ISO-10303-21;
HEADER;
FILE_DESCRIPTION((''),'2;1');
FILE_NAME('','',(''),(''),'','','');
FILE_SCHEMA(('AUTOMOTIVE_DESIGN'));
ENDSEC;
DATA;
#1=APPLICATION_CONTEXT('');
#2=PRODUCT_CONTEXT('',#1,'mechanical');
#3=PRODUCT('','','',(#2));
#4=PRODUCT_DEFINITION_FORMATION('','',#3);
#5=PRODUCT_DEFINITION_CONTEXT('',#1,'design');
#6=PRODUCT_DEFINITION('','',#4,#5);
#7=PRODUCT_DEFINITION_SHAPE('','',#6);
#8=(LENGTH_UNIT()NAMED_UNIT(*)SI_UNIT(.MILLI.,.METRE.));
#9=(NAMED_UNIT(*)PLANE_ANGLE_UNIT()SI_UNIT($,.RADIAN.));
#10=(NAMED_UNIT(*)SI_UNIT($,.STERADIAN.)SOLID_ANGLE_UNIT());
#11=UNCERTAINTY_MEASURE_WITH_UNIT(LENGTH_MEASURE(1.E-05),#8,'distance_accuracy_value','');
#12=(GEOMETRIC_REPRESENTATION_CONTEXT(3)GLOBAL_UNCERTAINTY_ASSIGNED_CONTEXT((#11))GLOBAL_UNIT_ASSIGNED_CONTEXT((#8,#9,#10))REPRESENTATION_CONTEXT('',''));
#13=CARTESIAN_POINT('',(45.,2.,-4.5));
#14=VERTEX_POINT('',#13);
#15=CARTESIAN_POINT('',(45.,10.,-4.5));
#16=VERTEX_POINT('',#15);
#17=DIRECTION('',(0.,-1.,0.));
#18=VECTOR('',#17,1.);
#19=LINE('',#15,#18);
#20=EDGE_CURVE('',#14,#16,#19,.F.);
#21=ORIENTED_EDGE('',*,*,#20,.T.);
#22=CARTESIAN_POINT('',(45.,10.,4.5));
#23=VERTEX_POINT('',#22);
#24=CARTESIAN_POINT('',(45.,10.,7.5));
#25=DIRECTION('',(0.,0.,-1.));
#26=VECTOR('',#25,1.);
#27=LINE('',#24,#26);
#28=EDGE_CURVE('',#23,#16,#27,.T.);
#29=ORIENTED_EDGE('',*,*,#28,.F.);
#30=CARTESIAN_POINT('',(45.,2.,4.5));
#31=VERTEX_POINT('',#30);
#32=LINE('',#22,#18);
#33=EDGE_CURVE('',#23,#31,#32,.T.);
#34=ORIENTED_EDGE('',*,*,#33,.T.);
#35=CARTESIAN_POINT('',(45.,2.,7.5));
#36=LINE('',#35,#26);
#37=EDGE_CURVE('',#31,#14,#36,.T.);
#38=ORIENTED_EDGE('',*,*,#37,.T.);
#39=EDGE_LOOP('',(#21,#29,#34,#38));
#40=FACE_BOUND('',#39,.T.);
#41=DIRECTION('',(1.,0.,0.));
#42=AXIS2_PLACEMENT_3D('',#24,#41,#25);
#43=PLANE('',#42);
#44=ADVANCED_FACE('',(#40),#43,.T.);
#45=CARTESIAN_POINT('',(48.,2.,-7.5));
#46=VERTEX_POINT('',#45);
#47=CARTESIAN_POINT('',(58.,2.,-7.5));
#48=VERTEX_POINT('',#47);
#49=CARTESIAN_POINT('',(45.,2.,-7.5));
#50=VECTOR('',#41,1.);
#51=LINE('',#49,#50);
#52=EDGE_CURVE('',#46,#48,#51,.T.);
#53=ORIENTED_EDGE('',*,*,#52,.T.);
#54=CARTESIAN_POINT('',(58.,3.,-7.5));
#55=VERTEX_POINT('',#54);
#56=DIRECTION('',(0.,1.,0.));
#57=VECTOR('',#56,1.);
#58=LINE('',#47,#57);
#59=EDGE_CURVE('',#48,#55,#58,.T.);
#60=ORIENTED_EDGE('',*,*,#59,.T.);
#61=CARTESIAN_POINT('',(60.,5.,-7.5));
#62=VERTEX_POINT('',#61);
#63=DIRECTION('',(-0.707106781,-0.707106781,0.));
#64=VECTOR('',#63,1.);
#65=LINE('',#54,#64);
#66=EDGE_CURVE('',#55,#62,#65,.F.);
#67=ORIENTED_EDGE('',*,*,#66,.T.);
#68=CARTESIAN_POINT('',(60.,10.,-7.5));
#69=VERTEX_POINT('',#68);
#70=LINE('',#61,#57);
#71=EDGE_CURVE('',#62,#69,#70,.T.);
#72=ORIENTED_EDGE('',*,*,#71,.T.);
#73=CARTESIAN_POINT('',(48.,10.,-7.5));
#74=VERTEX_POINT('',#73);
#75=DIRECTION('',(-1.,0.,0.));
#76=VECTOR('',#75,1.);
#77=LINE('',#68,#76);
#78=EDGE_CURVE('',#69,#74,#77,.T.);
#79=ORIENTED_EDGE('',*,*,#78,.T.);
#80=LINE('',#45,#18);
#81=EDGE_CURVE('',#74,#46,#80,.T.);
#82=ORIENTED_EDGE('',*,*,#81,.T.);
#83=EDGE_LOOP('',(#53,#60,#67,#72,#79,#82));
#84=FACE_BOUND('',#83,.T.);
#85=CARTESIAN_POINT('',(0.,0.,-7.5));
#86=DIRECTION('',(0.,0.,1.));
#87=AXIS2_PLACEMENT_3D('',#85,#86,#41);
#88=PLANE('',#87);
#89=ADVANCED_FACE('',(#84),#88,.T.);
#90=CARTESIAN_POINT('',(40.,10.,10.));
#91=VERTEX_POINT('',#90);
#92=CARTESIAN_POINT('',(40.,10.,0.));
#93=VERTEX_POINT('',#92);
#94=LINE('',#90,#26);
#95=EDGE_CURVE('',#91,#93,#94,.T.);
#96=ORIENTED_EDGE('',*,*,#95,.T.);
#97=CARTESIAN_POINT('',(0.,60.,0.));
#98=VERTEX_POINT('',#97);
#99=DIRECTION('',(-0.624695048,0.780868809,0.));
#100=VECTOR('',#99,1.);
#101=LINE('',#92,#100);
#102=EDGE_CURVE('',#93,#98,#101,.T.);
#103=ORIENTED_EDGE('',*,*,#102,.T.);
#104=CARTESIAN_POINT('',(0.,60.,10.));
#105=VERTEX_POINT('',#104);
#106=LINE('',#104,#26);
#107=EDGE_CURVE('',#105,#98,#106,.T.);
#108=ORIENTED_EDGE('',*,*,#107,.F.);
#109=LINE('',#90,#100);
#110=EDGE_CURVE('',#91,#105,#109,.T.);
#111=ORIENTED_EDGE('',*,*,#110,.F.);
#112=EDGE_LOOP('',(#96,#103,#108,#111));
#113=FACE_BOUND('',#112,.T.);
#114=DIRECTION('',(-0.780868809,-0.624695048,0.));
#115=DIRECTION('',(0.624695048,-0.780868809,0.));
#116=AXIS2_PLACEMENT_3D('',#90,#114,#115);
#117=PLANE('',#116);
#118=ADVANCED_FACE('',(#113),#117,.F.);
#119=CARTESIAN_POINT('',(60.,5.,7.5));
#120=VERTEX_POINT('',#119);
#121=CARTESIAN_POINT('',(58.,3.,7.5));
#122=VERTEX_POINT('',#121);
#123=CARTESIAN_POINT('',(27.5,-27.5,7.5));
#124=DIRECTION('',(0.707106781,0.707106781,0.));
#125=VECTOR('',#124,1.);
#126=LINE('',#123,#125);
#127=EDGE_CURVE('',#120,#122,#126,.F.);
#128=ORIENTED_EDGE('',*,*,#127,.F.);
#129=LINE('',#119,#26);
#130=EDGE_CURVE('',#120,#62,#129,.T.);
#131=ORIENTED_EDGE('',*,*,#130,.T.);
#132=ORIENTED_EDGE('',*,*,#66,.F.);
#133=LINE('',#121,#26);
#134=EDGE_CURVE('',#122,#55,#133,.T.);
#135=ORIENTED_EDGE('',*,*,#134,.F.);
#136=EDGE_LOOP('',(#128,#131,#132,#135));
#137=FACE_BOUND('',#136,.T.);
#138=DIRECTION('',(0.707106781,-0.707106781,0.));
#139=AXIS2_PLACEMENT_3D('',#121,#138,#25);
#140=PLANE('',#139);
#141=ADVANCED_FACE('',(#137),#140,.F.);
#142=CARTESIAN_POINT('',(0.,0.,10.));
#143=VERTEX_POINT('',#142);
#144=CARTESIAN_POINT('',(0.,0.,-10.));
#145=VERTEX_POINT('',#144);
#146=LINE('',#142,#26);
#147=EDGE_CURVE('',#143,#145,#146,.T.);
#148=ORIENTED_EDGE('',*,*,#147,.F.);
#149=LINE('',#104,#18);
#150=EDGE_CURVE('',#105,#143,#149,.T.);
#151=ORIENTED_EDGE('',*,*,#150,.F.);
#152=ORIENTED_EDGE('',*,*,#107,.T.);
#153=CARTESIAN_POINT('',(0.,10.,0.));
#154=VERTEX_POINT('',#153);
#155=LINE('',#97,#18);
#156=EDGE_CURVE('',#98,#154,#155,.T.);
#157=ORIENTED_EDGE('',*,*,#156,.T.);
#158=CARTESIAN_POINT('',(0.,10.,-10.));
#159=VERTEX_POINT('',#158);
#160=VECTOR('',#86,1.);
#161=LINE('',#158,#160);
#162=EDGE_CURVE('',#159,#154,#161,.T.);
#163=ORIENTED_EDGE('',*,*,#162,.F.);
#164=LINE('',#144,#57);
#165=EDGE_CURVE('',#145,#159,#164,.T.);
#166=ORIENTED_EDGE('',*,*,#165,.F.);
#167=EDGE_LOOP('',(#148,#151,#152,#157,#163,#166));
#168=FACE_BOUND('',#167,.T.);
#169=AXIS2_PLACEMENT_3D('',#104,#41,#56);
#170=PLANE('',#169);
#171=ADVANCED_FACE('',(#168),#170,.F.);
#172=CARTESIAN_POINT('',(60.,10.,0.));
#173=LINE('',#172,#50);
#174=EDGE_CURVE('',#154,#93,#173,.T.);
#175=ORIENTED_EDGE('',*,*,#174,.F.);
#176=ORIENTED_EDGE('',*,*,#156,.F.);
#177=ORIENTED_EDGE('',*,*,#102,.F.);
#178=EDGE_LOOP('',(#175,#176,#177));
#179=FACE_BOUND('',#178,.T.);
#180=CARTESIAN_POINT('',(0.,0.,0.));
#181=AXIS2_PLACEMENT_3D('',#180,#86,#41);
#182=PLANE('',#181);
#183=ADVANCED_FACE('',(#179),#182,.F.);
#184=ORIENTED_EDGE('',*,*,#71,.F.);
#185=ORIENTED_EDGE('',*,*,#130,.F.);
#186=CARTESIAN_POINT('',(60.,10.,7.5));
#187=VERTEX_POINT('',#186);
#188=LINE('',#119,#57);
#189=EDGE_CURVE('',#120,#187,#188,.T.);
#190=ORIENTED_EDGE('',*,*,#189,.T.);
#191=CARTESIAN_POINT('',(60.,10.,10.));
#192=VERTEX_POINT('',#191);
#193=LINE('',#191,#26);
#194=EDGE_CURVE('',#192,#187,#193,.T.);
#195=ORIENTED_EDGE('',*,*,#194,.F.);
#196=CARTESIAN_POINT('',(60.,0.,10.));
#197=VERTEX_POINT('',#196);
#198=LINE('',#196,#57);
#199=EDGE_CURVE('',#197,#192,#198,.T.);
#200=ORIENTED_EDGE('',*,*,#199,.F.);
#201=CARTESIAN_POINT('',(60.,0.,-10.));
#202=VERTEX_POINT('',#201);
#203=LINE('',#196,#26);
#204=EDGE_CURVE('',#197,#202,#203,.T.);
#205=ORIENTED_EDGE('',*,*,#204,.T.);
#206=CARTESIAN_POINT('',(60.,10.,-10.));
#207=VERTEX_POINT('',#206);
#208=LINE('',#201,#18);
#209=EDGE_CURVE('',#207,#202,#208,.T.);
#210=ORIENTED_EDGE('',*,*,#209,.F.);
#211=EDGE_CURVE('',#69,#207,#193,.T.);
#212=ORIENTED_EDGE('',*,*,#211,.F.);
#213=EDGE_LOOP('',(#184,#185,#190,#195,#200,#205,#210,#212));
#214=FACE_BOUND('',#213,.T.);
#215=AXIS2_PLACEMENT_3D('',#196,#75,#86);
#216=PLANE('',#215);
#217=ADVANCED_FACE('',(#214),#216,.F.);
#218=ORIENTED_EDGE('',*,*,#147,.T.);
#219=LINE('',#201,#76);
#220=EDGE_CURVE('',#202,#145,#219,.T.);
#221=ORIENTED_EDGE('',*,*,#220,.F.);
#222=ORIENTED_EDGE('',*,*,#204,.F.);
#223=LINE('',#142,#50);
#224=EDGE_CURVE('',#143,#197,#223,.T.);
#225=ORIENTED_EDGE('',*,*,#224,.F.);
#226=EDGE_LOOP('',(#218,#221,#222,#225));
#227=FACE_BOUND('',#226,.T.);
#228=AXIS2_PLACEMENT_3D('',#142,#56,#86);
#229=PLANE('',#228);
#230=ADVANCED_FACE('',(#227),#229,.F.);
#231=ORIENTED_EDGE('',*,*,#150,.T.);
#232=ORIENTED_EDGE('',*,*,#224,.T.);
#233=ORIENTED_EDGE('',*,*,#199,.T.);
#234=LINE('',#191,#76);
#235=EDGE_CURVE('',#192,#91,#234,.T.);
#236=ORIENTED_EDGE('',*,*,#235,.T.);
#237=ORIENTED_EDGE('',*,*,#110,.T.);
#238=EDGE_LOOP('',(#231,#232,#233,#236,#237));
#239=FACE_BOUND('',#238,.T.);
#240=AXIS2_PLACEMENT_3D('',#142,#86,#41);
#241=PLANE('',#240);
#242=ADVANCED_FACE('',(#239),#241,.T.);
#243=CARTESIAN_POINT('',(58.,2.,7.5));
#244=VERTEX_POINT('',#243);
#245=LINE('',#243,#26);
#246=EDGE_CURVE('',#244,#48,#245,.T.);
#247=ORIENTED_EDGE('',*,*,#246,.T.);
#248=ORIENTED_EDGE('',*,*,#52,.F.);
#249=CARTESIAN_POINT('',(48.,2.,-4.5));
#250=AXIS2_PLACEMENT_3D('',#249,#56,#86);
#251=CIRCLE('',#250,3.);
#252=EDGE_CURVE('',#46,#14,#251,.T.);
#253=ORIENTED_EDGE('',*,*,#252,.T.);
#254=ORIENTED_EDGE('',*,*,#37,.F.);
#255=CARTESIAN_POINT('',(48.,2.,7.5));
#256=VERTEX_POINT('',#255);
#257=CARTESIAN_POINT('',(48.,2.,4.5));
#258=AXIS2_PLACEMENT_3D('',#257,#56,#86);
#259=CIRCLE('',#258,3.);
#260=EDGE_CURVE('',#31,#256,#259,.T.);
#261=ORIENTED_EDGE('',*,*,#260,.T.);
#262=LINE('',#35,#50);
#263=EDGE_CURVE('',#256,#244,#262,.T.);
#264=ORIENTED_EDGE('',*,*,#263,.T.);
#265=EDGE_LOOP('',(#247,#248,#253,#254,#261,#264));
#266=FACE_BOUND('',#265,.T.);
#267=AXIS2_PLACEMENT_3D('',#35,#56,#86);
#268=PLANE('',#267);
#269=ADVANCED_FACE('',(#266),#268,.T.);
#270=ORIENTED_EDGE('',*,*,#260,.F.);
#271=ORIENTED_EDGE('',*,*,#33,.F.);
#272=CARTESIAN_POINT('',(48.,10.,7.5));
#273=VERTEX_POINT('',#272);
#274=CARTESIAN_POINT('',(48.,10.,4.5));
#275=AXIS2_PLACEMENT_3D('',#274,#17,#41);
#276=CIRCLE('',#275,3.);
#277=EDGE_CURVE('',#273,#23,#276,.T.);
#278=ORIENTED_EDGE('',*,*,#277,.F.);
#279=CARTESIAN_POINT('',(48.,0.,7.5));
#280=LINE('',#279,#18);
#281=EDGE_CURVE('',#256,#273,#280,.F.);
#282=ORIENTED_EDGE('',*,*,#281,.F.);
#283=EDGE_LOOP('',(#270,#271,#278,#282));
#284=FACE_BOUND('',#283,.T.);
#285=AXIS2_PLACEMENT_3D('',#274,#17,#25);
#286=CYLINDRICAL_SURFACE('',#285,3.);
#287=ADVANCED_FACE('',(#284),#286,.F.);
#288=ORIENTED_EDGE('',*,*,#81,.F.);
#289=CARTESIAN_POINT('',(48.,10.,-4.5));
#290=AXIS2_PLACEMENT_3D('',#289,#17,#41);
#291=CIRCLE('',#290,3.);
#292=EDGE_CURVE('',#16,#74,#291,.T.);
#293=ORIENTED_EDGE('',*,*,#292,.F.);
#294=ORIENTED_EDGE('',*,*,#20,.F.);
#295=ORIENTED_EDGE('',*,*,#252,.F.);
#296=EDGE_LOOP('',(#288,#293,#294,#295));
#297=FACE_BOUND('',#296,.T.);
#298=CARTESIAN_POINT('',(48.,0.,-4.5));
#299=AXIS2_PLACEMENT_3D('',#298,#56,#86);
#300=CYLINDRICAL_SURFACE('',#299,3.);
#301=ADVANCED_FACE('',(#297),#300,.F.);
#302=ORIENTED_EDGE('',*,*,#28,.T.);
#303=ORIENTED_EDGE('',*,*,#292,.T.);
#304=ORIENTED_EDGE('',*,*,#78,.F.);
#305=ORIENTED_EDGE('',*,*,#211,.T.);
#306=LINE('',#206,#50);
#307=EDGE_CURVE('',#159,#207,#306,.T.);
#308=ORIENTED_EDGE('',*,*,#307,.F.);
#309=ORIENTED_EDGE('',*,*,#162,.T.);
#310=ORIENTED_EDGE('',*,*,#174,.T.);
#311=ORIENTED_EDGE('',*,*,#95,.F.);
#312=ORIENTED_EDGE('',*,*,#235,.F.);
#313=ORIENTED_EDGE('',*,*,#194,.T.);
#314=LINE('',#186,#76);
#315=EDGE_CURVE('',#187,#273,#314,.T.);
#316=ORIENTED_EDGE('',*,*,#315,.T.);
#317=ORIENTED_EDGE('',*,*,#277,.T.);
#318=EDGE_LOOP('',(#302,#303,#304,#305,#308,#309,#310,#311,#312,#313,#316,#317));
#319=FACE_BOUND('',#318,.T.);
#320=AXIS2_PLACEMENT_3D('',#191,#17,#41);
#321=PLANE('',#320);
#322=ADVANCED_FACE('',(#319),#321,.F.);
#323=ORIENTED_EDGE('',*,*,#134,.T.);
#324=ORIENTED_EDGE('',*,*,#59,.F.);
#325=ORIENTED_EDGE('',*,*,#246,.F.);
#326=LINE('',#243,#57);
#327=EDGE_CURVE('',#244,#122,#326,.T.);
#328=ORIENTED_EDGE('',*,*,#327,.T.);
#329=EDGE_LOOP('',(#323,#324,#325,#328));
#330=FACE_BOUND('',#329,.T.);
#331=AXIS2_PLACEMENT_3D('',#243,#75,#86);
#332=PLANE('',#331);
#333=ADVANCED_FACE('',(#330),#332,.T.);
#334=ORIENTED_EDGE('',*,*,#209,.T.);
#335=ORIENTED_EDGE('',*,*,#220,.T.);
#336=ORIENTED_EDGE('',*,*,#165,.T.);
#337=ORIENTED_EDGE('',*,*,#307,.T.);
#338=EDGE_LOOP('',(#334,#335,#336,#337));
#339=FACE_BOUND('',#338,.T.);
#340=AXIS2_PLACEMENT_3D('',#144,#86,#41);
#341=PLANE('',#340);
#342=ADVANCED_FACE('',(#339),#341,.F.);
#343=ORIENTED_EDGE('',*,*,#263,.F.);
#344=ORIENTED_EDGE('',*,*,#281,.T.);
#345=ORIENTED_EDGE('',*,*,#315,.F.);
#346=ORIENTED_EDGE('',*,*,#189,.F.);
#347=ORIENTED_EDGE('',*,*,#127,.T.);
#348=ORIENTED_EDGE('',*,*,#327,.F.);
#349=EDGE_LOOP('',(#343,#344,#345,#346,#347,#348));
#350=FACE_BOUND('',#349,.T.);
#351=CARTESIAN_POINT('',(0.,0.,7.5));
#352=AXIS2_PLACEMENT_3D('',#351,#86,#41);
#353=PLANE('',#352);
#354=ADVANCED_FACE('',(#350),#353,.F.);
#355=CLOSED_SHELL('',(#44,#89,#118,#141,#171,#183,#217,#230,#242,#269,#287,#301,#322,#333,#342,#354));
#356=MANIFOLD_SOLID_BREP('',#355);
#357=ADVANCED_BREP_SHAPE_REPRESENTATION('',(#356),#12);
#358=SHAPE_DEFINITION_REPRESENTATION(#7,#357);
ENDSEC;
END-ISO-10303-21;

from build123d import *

# Parameters (mm, degrees)
AUFSATZ_LINEAR_AUSTRAGEN1_DEPTH      = 10
SKIZZE2_W                            = 60
SKIZZE2_H                            = 10
AUFSATZ_LINEAR_AUSTRAGEN2_DEPTH      = 10
SCHNITT_LINEAR_AUSTRAGEN2_DEPTH      = 7.5
SCHNITT_LINEAR_AUSTRAGEN2_DEPTH_BACK = 7.5
FASE1_SIZE                           = 2
VERRUNDUNG1_R                        = 3


with BuildPart() as part:
    # Skizze1 → Aufsatz-Linear austragen1 (new body)
    with BuildSketch(Plane.XY):
        Polygon((40, 10), (0, 60), (0, 0), (60, 0), (60, 10), align=None)
    extrude(amount=AUFSATZ_LINEAR_AUSTRAGEN1_DEPTH)

    # Skizze2 → Aufsatz-Linear austragen2 (add)
    with BuildSketch(Plane(origin=(0, 0, 0), x_dir=(-1, 0, 0), z_dir=(0, 0, -1))):
        with Locations((-30, 5)):
            Rectangle(SKIZZE2_W, SKIZZE2_H)
    extrude(amount=AUFSATZ_LINEAR_AUSTRAGEN2_DEPTH)

    # Skizze4 → Schnitt-Linear austragen2 (cut, two sides: drawn at the far end of the back side and taken through both)
    with BuildSketch(Plane.XY.offset(-SCHNITT_LINEAR_AUSTRAGEN2_DEPTH_BACK)):
        Polygon((60, 10), (45, 10), (45, 2), (58, 2), (58, 5), (60, 5), align=None)
    extrude(amount=SCHNITT_LINEAR_AUSTRAGEN2_DEPTH + SCHNITT_LINEAR_AUSTRAGEN2_DEPTH_BACK, mode=Mode.SUBTRACT)

    # Fase1
    fase1_edges = [part.edges().sort_by_distance(p)[0] for p in [
        (58, 5, 0),
    ]]
    chamfer(fase1_edges, length=FASE1_SIZE - 0.0001)  # a hair under: the kernel refuses the full size

    # Verrundung1
    verrundung1_edges = [part.edges().sort_by_distance(p)[0] for p in [
        (45, 6, -7.5),
        (45, 6, 7.5),
    ]]
    fillet(verrundung1_edges, radius=VERRUNDUNG1_R)


solid = part.part
